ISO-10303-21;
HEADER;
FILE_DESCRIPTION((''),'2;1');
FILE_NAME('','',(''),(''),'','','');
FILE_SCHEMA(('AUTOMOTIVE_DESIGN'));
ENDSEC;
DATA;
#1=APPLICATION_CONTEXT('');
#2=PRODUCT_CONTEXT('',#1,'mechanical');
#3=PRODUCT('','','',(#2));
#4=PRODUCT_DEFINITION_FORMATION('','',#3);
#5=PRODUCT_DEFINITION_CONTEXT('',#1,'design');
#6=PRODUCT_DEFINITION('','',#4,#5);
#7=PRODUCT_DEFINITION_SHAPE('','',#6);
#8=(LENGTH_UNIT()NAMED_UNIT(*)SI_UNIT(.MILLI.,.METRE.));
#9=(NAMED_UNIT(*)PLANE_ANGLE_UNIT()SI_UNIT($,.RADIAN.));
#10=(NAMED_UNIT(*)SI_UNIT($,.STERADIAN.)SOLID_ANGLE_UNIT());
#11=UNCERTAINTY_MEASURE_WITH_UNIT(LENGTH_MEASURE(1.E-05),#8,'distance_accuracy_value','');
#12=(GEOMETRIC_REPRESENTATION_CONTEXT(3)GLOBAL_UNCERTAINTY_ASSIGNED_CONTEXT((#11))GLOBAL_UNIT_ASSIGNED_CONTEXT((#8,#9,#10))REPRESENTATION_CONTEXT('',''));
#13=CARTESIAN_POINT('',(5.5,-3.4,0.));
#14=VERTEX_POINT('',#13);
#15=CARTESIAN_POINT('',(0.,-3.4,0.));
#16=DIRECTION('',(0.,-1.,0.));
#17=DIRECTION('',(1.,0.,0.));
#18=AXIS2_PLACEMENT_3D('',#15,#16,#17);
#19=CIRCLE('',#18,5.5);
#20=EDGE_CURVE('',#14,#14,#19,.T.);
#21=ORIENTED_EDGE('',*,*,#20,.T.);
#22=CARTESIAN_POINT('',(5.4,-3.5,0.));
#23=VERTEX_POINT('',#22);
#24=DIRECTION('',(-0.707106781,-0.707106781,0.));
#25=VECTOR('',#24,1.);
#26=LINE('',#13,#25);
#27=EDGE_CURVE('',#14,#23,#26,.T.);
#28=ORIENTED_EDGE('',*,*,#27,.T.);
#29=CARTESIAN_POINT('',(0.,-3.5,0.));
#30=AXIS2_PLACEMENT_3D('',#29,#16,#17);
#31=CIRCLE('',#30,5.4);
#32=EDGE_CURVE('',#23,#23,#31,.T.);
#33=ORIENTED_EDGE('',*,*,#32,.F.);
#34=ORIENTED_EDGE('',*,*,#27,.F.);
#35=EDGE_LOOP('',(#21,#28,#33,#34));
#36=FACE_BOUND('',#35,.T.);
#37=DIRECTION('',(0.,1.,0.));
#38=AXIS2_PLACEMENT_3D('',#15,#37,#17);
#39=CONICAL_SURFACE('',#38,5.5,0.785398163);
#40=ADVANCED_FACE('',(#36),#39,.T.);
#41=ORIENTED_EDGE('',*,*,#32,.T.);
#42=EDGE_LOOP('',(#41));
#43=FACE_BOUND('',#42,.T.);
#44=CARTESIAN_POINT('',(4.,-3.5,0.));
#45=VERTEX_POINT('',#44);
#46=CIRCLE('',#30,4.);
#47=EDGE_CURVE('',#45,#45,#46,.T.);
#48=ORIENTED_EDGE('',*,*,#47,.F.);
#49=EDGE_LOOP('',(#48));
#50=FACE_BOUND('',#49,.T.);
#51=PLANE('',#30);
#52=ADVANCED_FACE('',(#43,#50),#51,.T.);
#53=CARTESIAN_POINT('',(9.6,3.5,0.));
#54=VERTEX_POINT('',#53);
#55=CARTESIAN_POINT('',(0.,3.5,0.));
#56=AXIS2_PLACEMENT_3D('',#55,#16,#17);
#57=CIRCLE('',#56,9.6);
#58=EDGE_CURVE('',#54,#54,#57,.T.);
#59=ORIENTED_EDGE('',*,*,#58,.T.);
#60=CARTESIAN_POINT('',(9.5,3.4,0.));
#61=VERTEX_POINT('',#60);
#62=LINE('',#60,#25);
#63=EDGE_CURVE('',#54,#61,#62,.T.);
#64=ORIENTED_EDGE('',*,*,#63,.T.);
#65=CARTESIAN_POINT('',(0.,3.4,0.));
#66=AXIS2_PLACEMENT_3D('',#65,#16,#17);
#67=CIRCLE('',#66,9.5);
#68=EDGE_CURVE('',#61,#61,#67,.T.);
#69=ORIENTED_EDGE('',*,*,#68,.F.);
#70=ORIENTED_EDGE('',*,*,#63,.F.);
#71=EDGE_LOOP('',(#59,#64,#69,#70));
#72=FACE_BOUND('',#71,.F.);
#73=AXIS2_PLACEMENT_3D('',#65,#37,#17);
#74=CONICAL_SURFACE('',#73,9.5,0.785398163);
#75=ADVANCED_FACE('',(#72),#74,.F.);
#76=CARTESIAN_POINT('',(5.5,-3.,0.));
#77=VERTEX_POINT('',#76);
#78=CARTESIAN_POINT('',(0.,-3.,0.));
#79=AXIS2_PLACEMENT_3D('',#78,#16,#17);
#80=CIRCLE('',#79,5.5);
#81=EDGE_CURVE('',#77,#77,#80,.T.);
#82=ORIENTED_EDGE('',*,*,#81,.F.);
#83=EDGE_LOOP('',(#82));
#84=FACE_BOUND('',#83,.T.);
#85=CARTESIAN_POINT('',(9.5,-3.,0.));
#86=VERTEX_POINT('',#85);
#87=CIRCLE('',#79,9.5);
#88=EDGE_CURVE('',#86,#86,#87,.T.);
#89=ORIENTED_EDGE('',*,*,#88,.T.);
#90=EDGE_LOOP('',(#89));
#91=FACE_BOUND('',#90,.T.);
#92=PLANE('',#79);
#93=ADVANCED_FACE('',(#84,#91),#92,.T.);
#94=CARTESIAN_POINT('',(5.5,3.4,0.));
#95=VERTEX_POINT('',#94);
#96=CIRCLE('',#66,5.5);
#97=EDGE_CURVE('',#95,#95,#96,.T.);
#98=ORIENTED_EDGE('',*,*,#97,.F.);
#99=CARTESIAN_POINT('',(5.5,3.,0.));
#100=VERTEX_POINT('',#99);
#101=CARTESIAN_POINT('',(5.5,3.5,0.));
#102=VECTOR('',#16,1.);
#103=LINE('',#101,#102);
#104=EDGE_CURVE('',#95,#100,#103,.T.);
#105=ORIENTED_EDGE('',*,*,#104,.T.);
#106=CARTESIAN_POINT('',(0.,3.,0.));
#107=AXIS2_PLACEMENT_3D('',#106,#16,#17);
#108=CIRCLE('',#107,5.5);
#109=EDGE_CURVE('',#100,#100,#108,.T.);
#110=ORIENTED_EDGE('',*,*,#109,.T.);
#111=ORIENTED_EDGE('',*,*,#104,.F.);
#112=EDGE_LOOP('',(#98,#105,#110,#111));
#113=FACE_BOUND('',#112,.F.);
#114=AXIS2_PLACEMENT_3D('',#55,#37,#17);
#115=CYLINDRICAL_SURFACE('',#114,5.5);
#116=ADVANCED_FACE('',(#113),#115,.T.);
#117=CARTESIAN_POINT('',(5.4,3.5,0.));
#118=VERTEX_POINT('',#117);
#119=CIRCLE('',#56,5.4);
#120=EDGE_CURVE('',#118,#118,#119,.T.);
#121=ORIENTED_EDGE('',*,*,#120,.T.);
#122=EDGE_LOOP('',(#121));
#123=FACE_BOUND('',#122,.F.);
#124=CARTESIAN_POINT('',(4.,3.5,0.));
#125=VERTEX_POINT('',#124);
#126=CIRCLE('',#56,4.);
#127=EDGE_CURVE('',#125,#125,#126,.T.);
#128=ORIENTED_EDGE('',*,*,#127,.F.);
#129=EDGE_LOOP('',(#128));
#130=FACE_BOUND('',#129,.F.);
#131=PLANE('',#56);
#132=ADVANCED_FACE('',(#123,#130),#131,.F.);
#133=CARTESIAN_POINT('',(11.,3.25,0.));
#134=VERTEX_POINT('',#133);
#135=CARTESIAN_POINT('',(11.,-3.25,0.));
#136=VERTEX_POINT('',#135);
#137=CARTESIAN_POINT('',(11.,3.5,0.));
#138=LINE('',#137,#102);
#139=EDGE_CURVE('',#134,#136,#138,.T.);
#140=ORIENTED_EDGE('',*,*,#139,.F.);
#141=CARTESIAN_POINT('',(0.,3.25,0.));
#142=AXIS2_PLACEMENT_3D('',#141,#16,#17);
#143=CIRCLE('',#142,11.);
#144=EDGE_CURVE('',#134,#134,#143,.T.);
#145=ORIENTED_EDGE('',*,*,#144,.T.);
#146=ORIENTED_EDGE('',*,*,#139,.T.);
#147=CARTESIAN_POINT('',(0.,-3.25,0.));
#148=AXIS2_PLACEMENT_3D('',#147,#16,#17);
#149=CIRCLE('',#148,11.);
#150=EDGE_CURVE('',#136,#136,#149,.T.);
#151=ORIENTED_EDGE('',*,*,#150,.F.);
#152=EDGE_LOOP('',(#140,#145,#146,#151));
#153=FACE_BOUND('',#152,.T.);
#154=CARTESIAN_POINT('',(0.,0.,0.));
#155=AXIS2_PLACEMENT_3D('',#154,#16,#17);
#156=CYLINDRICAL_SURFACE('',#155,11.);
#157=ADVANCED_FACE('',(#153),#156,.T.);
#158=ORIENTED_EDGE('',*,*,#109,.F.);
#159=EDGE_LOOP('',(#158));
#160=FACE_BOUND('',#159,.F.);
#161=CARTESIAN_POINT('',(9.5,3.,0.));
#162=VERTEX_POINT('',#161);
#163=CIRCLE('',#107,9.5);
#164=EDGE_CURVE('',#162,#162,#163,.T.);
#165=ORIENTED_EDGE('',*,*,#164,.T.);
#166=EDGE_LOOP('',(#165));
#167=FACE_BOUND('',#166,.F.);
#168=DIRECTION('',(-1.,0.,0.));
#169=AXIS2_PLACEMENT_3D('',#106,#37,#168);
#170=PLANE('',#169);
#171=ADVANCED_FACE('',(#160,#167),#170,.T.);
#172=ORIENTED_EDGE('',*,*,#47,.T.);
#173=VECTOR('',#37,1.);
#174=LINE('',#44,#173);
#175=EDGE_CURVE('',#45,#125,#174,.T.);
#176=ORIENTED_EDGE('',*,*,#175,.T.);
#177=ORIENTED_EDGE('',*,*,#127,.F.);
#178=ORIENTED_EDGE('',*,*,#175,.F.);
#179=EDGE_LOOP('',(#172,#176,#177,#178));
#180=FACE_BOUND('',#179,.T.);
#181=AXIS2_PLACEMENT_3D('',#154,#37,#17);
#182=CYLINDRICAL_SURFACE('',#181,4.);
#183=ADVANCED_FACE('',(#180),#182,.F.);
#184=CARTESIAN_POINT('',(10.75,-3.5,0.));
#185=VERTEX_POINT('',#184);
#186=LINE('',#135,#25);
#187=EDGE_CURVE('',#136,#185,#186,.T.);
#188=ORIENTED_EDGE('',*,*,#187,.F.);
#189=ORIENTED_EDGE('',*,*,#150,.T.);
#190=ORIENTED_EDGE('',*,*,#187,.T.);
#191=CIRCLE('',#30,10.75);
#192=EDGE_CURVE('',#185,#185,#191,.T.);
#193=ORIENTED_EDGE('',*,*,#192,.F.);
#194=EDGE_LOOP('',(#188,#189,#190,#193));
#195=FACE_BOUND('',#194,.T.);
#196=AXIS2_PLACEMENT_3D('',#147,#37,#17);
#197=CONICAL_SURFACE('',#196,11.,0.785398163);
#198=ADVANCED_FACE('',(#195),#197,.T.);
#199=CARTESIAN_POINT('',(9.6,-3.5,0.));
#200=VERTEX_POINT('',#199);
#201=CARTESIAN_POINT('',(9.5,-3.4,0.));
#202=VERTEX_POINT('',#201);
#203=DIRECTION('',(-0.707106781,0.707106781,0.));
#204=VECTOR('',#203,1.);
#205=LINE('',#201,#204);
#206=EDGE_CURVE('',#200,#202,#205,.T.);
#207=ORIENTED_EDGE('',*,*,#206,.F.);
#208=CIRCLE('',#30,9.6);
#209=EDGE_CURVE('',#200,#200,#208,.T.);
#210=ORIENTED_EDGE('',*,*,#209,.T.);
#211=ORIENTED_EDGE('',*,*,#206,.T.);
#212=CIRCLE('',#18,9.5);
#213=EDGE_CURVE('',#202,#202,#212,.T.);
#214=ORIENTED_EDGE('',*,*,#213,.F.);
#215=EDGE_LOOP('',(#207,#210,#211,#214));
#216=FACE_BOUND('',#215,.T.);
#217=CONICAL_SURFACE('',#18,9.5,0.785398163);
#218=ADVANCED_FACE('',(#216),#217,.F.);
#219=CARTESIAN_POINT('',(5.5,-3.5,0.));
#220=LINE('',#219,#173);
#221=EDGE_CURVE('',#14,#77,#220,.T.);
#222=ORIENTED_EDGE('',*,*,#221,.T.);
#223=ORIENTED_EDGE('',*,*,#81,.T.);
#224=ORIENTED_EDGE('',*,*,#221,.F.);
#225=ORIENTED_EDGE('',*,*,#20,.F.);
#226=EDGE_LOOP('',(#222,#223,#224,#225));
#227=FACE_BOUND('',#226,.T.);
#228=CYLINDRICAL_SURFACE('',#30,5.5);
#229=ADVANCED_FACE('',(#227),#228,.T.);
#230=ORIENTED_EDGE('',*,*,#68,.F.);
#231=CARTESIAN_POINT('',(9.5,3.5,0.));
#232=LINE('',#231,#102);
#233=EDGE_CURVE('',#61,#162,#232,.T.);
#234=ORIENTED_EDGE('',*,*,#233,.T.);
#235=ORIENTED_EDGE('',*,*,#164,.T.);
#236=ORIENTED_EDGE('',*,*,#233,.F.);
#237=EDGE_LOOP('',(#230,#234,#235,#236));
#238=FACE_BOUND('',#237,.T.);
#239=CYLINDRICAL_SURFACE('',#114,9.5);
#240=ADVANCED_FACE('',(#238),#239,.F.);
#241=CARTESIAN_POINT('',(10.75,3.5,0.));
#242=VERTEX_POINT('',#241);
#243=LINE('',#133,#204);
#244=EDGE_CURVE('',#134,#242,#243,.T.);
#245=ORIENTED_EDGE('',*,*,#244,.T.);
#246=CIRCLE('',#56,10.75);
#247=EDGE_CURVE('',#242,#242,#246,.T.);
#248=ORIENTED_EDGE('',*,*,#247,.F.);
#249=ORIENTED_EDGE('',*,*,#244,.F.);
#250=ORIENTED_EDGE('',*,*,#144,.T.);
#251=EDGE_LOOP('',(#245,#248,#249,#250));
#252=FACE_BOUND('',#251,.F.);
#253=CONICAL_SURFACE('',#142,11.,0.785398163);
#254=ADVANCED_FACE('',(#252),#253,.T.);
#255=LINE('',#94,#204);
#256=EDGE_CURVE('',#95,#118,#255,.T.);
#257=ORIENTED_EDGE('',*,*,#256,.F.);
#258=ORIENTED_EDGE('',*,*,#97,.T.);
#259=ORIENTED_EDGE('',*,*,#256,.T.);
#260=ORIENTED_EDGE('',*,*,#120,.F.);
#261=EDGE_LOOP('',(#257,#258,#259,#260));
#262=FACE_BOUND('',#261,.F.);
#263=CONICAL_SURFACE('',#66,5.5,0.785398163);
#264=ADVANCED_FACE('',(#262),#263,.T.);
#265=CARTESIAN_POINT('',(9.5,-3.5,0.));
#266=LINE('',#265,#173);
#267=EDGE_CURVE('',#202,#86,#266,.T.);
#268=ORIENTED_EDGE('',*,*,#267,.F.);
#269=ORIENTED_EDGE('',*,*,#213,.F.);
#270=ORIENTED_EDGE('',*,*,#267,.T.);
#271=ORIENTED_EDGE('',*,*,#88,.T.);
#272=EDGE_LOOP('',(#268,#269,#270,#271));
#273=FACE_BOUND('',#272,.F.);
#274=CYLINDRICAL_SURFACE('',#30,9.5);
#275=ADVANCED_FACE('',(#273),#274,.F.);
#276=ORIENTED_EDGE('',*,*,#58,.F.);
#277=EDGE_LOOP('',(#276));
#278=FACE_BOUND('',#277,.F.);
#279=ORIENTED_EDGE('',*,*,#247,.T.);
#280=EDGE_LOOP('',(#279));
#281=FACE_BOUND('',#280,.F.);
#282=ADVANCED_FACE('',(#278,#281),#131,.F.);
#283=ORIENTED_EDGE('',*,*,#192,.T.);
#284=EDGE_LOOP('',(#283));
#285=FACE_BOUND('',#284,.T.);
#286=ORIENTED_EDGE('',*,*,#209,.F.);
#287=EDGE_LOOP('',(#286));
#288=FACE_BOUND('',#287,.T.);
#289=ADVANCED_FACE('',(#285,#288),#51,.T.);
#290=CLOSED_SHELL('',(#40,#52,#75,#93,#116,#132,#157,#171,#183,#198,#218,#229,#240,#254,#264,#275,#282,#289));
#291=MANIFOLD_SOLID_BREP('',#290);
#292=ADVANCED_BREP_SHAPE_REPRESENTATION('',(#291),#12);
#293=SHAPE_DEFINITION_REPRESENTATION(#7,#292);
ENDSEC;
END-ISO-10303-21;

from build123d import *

# Parameters (mm, degrees)
F0_R     = 11
F0_R_2   = 4
F1_DEPTH = 3.5
F2_R     = 9.5
F2_R_2   = 5.5
F3_DEPTH = 0.5
F4_SIZE  = 0.25
F5_SIZE  = 0.1


# Not quite as in the source:
# - a pattern or mirror of a feature is missing from the dataset's text; its kind, count and spacing are read off the source's solid


with BuildPart() as f1:
    # F0 (on Front) → F1 (new body, symmetric)
    with BuildSketch(Plane.XZ):
        Circle(F0_R)
        Circle(F0_R_2, mode=Mode.SUBTRACT)
    extrude(amount=F1_DEPTH, both=True)

    # F2 (on face) → F3 (cut)
    with BuildSketch(Plane.XZ.offset(3.5)):
        Circle(F2_R)
        Circle(F2_R_2, mode=Mode.SUBTRACT)
    f3 = extrude(amount=-F3_DEPTH, mode=Mode.SUBTRACT)

    # F3_copies: F3 across plane
    add(f3.mirror(Plane.ZX), mode=Mode.SUBTRACT)

    # F4
    f4_edges = [f1.edges().sort_by_distance(p)[0] for p in [
        (-11, -3.5, 0),
        (-11, 3.5, 0),
    ]]
    chamfer(f4_edges, length=F4_SIZE)

    # F5
    f5_edges = [f1.edges().sort_by_distance(p)[0] for p in [
        (-9.5, -3.5, 0),
        (-5.5, -3.5, 0),
        (-9.5, 3.5, 0),
        (-5.5, 3.5, 0),
    ]]
    chamfer(f5_edges, length=F5_SIZE)


solid = f1.part
